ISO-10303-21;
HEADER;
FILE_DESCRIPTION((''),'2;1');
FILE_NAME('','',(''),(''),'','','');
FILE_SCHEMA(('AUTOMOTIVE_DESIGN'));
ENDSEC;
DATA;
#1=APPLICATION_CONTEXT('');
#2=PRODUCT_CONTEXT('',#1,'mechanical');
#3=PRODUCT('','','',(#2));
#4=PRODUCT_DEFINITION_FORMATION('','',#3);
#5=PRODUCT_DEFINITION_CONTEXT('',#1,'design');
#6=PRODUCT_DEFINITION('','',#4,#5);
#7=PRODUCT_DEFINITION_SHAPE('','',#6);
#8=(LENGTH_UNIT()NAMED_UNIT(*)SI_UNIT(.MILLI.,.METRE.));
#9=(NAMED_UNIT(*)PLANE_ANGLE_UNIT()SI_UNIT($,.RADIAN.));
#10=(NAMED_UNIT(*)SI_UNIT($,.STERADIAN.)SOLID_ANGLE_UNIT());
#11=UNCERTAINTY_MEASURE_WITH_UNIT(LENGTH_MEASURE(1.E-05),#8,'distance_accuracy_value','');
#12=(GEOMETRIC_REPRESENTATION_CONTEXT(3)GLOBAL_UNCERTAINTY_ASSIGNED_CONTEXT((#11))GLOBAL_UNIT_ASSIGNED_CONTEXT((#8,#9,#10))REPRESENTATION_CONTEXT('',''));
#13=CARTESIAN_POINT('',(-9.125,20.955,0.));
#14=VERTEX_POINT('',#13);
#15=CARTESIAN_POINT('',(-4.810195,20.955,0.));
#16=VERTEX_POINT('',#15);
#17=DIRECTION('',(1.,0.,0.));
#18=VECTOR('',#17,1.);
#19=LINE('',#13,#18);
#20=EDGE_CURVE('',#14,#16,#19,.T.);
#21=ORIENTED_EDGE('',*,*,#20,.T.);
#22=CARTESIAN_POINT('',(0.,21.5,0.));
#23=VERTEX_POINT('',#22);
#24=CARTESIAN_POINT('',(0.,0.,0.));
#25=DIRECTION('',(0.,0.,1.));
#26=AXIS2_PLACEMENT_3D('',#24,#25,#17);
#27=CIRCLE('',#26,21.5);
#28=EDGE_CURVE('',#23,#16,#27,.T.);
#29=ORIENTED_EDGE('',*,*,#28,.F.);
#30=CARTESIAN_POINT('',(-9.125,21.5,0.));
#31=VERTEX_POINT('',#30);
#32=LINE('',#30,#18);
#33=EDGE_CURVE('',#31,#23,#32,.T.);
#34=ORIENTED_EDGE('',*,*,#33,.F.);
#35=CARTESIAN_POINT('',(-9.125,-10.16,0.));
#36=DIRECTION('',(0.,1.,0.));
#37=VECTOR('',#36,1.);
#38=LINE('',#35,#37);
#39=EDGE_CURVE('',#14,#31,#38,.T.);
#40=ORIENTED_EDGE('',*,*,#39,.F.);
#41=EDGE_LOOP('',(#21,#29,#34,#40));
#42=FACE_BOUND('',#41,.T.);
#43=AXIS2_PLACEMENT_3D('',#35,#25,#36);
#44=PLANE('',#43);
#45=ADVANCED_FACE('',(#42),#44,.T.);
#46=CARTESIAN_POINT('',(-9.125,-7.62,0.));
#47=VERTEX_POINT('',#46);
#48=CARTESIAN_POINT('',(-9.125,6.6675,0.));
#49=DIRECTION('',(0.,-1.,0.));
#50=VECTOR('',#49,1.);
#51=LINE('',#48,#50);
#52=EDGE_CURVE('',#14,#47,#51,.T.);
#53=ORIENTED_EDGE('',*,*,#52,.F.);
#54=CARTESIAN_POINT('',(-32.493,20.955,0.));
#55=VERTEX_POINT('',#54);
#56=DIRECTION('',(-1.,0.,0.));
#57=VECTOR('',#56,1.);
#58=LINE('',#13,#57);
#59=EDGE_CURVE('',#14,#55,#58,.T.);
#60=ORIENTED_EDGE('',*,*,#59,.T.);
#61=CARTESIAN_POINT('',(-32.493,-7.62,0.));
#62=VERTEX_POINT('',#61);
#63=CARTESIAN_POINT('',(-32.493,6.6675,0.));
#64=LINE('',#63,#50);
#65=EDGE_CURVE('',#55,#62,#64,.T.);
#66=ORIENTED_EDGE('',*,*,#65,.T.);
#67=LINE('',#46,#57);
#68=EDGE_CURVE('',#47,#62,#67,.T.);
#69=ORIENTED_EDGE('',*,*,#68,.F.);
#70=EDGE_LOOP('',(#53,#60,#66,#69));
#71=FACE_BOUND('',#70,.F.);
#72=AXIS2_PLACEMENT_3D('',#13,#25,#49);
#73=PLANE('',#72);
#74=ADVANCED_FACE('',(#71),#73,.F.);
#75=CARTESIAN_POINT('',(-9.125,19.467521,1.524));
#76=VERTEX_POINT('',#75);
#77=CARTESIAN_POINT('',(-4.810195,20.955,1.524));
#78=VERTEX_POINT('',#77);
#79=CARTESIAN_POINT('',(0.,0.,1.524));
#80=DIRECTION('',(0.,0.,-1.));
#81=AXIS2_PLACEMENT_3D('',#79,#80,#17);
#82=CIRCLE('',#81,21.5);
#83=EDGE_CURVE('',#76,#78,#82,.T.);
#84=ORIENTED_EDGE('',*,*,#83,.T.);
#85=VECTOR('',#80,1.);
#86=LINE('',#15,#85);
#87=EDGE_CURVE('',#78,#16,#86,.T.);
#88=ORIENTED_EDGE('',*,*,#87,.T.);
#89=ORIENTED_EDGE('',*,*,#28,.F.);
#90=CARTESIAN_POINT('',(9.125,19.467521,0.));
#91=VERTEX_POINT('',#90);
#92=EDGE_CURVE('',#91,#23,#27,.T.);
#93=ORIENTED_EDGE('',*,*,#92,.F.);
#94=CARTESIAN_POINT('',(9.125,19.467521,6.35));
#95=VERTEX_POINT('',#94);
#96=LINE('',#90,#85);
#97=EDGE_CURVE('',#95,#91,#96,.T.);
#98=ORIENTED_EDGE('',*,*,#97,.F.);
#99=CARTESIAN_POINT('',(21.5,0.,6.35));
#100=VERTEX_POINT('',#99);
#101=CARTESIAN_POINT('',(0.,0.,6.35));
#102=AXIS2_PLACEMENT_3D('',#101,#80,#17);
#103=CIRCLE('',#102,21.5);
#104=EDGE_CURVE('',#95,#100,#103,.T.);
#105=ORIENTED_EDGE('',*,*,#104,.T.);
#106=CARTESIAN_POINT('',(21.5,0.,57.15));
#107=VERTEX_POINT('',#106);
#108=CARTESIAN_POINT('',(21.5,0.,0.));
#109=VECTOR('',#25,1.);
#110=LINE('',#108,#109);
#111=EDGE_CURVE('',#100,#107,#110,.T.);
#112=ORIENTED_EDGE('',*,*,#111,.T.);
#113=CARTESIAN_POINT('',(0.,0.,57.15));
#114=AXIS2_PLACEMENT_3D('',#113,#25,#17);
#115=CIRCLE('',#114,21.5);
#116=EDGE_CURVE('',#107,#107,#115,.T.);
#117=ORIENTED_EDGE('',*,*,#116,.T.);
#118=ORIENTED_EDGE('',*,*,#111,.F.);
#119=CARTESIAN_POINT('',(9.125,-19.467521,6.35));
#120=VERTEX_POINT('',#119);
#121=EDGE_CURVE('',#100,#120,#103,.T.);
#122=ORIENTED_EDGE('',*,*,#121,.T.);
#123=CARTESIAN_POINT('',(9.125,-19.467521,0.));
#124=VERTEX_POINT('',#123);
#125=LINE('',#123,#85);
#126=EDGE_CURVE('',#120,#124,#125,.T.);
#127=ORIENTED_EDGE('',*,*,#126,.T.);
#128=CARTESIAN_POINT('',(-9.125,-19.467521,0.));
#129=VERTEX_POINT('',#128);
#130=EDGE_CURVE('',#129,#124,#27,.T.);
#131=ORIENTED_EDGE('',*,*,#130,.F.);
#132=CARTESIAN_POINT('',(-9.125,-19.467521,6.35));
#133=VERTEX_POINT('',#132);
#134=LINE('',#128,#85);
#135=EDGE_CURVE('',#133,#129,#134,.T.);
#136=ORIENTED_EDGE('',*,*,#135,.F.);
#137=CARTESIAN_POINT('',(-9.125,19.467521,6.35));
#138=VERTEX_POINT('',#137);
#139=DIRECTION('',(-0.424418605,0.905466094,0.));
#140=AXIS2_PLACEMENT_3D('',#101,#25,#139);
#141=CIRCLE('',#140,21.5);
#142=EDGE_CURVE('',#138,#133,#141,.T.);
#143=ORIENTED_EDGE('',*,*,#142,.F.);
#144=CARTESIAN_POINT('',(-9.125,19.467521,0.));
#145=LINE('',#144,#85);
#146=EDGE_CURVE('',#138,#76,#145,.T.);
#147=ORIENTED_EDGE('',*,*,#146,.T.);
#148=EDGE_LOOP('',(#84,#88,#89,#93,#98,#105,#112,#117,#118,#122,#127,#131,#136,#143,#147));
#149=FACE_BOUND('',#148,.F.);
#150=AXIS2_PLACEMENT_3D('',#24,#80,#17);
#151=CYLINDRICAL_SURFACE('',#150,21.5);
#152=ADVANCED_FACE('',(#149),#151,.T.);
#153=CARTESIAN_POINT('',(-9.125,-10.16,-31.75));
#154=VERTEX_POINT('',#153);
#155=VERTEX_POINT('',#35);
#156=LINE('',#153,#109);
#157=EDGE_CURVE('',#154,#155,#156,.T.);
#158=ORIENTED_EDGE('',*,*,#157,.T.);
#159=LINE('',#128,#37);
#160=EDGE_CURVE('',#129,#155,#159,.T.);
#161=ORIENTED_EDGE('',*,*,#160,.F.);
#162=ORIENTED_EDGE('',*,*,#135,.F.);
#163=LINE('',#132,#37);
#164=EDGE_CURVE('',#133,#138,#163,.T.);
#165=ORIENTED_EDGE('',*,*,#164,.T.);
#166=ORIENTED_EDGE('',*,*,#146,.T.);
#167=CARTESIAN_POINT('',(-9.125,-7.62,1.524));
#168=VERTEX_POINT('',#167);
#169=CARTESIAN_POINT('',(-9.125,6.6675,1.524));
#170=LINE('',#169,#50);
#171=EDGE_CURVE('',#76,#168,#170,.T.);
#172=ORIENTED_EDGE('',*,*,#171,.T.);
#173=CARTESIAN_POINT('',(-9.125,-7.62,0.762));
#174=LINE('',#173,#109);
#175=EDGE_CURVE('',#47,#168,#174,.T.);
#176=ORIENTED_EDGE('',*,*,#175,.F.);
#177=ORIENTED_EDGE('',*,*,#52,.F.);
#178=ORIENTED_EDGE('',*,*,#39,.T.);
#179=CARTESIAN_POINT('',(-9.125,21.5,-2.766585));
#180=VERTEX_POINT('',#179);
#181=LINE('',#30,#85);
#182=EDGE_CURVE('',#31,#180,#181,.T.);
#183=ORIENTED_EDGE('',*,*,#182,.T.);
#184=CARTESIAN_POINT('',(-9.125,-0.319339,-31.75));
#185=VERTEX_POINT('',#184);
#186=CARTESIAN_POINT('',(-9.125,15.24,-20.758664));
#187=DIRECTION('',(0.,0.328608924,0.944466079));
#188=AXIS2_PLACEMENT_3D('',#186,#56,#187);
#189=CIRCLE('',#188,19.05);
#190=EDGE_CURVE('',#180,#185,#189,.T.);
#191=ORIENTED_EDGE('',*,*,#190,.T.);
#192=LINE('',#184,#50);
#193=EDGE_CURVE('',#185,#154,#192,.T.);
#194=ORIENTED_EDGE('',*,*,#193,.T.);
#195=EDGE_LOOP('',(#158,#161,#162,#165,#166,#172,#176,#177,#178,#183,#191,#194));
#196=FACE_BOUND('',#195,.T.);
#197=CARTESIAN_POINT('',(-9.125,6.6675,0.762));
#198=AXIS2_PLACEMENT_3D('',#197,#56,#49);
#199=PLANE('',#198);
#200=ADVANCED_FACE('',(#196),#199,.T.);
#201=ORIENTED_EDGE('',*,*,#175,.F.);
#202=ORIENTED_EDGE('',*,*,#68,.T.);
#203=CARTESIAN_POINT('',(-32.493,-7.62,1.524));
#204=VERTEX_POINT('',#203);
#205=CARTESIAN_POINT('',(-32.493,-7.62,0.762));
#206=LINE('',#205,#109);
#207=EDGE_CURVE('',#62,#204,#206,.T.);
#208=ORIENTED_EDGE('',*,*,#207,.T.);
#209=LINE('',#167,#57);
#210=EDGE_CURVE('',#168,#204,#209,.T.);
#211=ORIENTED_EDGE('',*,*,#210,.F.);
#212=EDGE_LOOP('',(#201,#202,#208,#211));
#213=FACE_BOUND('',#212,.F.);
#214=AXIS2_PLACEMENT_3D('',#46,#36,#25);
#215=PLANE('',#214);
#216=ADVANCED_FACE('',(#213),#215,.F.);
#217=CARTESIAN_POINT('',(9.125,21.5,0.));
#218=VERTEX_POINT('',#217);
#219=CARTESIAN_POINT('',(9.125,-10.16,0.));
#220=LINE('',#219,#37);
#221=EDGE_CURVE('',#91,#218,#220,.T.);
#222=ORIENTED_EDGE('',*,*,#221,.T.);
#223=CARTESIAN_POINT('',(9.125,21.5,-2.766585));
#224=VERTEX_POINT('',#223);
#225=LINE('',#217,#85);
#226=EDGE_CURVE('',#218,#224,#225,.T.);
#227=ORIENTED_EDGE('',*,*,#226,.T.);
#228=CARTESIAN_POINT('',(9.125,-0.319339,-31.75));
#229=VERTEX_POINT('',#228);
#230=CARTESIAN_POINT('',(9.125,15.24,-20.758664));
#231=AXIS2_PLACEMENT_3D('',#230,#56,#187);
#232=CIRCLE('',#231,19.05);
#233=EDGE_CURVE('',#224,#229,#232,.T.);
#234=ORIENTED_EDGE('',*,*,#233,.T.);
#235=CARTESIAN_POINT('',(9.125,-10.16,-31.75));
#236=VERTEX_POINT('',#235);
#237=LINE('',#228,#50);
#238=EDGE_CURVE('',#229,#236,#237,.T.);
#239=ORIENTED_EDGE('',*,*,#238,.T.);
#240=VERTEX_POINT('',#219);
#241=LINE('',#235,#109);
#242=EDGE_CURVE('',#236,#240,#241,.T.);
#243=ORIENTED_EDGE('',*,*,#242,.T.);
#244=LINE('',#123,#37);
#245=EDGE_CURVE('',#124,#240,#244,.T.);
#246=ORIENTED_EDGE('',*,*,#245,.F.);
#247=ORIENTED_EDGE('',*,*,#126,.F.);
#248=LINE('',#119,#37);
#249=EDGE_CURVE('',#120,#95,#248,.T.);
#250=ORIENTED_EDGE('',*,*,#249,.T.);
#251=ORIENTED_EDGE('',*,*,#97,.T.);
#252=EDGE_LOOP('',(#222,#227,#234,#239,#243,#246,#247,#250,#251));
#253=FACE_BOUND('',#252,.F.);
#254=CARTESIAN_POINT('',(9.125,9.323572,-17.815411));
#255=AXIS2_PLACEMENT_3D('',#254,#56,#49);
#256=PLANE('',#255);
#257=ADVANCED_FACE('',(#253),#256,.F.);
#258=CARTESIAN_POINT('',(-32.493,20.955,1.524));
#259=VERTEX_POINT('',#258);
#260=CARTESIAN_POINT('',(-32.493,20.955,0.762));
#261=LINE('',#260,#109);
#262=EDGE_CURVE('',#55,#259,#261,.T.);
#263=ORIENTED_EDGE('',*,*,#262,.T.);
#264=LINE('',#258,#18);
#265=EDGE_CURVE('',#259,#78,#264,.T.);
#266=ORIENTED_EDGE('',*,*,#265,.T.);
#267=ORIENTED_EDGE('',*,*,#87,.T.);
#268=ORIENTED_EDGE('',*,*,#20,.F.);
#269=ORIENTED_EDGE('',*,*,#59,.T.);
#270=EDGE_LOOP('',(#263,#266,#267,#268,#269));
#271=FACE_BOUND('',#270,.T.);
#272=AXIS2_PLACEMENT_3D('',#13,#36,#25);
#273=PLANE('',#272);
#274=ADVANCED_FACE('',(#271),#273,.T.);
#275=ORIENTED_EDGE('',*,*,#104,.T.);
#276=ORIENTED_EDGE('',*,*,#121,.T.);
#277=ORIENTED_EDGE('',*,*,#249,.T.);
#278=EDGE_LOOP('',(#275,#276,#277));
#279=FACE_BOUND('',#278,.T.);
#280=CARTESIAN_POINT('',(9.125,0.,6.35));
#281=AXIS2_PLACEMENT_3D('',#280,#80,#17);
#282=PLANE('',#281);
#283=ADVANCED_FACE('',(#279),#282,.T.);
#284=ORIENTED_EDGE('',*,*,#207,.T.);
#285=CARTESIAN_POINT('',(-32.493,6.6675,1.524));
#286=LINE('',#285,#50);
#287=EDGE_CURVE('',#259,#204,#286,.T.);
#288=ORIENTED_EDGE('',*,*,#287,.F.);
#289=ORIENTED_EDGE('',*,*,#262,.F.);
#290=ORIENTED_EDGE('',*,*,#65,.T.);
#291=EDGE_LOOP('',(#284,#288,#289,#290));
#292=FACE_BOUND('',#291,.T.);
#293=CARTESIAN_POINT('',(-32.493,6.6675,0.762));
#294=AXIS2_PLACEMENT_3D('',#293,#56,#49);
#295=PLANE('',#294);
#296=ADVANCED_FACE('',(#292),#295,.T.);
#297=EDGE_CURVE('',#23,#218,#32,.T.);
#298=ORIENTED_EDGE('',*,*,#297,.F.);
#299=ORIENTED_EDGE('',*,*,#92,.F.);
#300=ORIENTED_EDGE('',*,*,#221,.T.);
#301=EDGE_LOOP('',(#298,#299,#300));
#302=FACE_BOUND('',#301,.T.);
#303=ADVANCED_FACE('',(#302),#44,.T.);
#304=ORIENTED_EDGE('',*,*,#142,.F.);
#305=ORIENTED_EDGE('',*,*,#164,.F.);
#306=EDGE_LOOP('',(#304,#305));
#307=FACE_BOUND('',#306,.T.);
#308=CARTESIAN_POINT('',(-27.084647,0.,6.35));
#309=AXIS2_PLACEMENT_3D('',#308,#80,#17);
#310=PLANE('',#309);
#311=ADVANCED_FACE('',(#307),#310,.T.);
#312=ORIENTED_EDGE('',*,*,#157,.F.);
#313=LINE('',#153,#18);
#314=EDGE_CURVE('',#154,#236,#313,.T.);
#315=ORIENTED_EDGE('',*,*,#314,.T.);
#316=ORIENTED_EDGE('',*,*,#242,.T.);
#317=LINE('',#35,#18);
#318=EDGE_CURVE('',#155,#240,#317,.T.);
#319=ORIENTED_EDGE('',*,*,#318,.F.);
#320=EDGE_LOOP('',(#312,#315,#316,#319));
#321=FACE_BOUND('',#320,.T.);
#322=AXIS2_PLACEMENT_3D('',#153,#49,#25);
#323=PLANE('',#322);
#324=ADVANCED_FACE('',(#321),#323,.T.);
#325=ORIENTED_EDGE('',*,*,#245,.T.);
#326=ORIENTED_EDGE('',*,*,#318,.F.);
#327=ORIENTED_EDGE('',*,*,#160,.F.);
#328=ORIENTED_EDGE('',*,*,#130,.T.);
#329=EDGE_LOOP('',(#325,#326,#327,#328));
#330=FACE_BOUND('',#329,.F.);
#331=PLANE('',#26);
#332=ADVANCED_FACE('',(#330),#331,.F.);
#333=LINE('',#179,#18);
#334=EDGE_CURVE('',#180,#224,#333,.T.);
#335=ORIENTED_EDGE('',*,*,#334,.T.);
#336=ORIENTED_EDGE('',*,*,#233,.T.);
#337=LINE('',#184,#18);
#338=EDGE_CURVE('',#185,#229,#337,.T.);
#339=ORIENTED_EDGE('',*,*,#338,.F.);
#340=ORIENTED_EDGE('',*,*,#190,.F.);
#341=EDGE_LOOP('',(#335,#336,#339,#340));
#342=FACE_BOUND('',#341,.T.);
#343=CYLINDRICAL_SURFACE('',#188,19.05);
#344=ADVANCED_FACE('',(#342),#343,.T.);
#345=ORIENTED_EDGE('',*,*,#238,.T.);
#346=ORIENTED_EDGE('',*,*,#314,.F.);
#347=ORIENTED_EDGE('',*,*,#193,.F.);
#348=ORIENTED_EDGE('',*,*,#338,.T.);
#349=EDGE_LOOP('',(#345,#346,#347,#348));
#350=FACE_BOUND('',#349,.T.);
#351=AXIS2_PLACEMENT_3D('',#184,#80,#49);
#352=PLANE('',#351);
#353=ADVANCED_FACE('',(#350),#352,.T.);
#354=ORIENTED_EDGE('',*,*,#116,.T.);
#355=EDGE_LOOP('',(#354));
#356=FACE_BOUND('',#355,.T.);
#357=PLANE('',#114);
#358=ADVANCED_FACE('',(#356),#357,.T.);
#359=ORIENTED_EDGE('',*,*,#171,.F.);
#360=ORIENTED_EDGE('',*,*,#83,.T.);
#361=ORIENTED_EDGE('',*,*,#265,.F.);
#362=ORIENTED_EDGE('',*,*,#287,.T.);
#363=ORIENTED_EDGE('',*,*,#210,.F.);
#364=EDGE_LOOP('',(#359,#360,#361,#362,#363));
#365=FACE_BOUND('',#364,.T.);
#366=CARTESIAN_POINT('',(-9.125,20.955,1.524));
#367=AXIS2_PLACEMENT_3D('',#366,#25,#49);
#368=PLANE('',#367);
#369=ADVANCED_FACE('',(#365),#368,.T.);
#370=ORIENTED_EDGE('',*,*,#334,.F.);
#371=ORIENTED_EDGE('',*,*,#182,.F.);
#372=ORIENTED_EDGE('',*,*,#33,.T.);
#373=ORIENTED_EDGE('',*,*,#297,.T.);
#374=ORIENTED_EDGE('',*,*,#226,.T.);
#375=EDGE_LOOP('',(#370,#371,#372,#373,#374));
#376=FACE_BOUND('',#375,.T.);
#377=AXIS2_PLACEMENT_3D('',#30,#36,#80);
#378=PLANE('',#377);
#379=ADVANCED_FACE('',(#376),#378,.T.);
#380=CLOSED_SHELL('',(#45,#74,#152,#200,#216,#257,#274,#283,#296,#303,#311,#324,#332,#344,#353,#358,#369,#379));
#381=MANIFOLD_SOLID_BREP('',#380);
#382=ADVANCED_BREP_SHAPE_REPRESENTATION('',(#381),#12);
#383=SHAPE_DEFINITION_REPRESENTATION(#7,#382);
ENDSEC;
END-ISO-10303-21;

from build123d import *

# Parameters (mm, degrees)
F0_R          = 21.5
F1_DEPTH      = 57.15
F2_W          = 17.9596467465
F2_H          = 6.35
F2_W_2        = 17.1457676739
F3_DEPTH      = 21.501
F3_DEPTH_BACK = 21.501
F5_DEPTH      = 18.25
F6_W          = 28.575
F6_H          = 1.524
F7_DEPTH      = 6.35
F7_DEPTH_BACK = 23.368


with BuildPart() as f1:
    # F0 (on Top) → F1 (new body)
    with BuildSketch(Plane.XY):
        Circle(F0_R)
    extrude(amount=F1_DEPTH)

    # F2 (on Front) → F3 (cut, two sides)
    with BuildSketch(Plane.XZ) as f3_sk:
        with Locations((-18.1048233733, 3.175)):
            Rectangle(F2_W, F2_H)
        with Locations((17.6978838369, 3.175)):
            Rectangle(F2_W_2, F2_H)
    extrude(amount=-F3_DEPTH, mode=Mode.SUBTRACT)
    extrude(f3_sk.sketch, amount=F3_DEPTH_BACK, mode=Mode.SUBTRACT)

    # F4 (on face) → F5 (join, through all)
    with BuildSketch(Plane(origin=(-9.125, 0, 0), x_dir=(0, -1, 0), z_dir=(-1, 0, 0))):
        with BuildLine():
            Line((-21.5, 0), (-21.5, -2.7665854228))
            ThreePointArc((-21.5, -2.7665854228), (-30.4593629233, -32.216128711), (0.3193392569, -31.75))
            Line((0.3193392569, -31.75), (10.16, -31.75))
            Line((10.16, -31.75), (10.16, 0))
            Line((10.16, 0), (-19.4675210286, 0))
            Line((-19.4675210286, 0), (-21.5, 0))
        make_face()
    extrude(amount=-F5_DEPTH)

    # F6 (on face) → F7 (join, two sides)
    with BuildSketch(Plane(origin=(-9.125, 0, 0), x_dir=(0, -1, 0), z_dir=(-1, 0, 0))) as f7_sk:
        with Locations((-6.6675, 0.762)):
            Rectangle(F6_W, F6_H)
    extrude(amount=-F7_DEPTH)
    extrude(f7_sk.sketch, amount=F7_DEPTH_BACK)


solid = f1.part
